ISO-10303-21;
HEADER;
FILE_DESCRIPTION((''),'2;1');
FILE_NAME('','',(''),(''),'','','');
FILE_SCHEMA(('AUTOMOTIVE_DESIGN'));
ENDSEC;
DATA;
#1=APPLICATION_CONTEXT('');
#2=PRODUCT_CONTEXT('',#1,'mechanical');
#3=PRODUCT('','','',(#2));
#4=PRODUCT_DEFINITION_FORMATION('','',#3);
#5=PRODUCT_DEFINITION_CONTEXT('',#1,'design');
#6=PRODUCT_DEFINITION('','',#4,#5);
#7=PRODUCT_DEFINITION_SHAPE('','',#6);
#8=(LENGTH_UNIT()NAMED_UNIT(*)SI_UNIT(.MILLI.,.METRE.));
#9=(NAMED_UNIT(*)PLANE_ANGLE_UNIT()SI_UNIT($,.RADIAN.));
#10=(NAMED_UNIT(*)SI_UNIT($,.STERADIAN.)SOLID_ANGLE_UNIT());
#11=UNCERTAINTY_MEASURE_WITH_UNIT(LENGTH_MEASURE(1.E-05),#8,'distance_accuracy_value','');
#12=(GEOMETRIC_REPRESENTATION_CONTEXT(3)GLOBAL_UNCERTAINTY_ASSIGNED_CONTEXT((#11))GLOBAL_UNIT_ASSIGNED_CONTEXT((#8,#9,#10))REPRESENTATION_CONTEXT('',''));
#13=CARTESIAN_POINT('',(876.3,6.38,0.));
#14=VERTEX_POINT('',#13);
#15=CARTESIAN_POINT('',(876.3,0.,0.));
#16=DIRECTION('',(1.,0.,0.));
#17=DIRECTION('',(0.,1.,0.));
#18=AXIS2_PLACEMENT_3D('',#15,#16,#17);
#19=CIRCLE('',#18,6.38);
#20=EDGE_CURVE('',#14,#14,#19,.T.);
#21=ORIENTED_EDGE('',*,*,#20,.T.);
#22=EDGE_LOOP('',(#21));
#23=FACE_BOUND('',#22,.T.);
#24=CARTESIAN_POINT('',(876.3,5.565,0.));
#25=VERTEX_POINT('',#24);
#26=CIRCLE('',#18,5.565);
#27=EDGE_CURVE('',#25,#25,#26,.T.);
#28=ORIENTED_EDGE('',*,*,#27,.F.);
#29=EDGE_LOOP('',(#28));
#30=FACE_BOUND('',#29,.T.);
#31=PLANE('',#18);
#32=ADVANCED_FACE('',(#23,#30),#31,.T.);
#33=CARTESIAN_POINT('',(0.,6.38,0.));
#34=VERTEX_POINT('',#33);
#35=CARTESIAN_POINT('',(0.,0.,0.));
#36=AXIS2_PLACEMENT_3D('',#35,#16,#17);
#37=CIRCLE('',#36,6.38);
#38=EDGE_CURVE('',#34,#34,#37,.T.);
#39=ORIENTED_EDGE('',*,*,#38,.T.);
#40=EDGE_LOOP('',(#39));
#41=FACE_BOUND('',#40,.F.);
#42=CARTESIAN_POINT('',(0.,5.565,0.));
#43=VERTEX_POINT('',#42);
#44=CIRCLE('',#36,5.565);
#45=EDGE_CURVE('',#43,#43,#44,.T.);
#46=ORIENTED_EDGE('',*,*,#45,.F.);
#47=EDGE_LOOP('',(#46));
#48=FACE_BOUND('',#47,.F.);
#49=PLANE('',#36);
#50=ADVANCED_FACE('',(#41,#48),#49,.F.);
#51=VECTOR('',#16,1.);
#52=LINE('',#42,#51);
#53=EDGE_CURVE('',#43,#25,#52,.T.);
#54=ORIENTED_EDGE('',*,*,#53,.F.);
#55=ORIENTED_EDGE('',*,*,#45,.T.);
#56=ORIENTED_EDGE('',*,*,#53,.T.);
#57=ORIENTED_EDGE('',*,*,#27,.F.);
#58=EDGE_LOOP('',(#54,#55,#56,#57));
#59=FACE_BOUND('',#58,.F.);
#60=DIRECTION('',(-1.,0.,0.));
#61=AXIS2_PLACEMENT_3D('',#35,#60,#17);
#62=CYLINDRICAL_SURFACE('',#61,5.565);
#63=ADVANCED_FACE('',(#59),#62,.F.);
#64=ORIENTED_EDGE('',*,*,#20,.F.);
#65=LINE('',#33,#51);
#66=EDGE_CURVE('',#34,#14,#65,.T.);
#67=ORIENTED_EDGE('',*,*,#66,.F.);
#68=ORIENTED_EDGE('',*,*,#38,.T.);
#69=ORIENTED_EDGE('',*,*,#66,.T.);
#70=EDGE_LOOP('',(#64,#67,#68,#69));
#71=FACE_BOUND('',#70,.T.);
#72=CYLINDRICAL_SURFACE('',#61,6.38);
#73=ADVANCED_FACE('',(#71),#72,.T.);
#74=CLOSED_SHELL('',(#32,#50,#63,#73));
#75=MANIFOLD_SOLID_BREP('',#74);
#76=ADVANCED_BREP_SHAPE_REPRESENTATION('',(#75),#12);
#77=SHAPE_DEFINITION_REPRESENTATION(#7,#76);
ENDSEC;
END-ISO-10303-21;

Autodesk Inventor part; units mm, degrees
ref_plane "YZ Plane" through (0, 0, 0) normal (1, 0, 0) x (0, 1, 0)
ref_plane "XZ Plane" through (0, 0, 0) normal (0, 1, 0) x (-1, 0, 0)
ref_plane "XY Plane" through (0, 0, 0) normal (0, 0, 1) x (1, 0, 0)
sketch "Sketch1" plane through (0, 0, 0) normal (1, 0, 0) x (0, 1, 0)
  circle A0 centre (0, 0) radius 6.38
  circle A1 centre (0, 0) radius 5.565
  dimension "d0" = 12.76
  dimension "d1" = 11.13
extrude "Extrusion1" add sketch "Sketch1" along normal blind 876.3
properties part number "rod-long" material "Aluminum 6061"
